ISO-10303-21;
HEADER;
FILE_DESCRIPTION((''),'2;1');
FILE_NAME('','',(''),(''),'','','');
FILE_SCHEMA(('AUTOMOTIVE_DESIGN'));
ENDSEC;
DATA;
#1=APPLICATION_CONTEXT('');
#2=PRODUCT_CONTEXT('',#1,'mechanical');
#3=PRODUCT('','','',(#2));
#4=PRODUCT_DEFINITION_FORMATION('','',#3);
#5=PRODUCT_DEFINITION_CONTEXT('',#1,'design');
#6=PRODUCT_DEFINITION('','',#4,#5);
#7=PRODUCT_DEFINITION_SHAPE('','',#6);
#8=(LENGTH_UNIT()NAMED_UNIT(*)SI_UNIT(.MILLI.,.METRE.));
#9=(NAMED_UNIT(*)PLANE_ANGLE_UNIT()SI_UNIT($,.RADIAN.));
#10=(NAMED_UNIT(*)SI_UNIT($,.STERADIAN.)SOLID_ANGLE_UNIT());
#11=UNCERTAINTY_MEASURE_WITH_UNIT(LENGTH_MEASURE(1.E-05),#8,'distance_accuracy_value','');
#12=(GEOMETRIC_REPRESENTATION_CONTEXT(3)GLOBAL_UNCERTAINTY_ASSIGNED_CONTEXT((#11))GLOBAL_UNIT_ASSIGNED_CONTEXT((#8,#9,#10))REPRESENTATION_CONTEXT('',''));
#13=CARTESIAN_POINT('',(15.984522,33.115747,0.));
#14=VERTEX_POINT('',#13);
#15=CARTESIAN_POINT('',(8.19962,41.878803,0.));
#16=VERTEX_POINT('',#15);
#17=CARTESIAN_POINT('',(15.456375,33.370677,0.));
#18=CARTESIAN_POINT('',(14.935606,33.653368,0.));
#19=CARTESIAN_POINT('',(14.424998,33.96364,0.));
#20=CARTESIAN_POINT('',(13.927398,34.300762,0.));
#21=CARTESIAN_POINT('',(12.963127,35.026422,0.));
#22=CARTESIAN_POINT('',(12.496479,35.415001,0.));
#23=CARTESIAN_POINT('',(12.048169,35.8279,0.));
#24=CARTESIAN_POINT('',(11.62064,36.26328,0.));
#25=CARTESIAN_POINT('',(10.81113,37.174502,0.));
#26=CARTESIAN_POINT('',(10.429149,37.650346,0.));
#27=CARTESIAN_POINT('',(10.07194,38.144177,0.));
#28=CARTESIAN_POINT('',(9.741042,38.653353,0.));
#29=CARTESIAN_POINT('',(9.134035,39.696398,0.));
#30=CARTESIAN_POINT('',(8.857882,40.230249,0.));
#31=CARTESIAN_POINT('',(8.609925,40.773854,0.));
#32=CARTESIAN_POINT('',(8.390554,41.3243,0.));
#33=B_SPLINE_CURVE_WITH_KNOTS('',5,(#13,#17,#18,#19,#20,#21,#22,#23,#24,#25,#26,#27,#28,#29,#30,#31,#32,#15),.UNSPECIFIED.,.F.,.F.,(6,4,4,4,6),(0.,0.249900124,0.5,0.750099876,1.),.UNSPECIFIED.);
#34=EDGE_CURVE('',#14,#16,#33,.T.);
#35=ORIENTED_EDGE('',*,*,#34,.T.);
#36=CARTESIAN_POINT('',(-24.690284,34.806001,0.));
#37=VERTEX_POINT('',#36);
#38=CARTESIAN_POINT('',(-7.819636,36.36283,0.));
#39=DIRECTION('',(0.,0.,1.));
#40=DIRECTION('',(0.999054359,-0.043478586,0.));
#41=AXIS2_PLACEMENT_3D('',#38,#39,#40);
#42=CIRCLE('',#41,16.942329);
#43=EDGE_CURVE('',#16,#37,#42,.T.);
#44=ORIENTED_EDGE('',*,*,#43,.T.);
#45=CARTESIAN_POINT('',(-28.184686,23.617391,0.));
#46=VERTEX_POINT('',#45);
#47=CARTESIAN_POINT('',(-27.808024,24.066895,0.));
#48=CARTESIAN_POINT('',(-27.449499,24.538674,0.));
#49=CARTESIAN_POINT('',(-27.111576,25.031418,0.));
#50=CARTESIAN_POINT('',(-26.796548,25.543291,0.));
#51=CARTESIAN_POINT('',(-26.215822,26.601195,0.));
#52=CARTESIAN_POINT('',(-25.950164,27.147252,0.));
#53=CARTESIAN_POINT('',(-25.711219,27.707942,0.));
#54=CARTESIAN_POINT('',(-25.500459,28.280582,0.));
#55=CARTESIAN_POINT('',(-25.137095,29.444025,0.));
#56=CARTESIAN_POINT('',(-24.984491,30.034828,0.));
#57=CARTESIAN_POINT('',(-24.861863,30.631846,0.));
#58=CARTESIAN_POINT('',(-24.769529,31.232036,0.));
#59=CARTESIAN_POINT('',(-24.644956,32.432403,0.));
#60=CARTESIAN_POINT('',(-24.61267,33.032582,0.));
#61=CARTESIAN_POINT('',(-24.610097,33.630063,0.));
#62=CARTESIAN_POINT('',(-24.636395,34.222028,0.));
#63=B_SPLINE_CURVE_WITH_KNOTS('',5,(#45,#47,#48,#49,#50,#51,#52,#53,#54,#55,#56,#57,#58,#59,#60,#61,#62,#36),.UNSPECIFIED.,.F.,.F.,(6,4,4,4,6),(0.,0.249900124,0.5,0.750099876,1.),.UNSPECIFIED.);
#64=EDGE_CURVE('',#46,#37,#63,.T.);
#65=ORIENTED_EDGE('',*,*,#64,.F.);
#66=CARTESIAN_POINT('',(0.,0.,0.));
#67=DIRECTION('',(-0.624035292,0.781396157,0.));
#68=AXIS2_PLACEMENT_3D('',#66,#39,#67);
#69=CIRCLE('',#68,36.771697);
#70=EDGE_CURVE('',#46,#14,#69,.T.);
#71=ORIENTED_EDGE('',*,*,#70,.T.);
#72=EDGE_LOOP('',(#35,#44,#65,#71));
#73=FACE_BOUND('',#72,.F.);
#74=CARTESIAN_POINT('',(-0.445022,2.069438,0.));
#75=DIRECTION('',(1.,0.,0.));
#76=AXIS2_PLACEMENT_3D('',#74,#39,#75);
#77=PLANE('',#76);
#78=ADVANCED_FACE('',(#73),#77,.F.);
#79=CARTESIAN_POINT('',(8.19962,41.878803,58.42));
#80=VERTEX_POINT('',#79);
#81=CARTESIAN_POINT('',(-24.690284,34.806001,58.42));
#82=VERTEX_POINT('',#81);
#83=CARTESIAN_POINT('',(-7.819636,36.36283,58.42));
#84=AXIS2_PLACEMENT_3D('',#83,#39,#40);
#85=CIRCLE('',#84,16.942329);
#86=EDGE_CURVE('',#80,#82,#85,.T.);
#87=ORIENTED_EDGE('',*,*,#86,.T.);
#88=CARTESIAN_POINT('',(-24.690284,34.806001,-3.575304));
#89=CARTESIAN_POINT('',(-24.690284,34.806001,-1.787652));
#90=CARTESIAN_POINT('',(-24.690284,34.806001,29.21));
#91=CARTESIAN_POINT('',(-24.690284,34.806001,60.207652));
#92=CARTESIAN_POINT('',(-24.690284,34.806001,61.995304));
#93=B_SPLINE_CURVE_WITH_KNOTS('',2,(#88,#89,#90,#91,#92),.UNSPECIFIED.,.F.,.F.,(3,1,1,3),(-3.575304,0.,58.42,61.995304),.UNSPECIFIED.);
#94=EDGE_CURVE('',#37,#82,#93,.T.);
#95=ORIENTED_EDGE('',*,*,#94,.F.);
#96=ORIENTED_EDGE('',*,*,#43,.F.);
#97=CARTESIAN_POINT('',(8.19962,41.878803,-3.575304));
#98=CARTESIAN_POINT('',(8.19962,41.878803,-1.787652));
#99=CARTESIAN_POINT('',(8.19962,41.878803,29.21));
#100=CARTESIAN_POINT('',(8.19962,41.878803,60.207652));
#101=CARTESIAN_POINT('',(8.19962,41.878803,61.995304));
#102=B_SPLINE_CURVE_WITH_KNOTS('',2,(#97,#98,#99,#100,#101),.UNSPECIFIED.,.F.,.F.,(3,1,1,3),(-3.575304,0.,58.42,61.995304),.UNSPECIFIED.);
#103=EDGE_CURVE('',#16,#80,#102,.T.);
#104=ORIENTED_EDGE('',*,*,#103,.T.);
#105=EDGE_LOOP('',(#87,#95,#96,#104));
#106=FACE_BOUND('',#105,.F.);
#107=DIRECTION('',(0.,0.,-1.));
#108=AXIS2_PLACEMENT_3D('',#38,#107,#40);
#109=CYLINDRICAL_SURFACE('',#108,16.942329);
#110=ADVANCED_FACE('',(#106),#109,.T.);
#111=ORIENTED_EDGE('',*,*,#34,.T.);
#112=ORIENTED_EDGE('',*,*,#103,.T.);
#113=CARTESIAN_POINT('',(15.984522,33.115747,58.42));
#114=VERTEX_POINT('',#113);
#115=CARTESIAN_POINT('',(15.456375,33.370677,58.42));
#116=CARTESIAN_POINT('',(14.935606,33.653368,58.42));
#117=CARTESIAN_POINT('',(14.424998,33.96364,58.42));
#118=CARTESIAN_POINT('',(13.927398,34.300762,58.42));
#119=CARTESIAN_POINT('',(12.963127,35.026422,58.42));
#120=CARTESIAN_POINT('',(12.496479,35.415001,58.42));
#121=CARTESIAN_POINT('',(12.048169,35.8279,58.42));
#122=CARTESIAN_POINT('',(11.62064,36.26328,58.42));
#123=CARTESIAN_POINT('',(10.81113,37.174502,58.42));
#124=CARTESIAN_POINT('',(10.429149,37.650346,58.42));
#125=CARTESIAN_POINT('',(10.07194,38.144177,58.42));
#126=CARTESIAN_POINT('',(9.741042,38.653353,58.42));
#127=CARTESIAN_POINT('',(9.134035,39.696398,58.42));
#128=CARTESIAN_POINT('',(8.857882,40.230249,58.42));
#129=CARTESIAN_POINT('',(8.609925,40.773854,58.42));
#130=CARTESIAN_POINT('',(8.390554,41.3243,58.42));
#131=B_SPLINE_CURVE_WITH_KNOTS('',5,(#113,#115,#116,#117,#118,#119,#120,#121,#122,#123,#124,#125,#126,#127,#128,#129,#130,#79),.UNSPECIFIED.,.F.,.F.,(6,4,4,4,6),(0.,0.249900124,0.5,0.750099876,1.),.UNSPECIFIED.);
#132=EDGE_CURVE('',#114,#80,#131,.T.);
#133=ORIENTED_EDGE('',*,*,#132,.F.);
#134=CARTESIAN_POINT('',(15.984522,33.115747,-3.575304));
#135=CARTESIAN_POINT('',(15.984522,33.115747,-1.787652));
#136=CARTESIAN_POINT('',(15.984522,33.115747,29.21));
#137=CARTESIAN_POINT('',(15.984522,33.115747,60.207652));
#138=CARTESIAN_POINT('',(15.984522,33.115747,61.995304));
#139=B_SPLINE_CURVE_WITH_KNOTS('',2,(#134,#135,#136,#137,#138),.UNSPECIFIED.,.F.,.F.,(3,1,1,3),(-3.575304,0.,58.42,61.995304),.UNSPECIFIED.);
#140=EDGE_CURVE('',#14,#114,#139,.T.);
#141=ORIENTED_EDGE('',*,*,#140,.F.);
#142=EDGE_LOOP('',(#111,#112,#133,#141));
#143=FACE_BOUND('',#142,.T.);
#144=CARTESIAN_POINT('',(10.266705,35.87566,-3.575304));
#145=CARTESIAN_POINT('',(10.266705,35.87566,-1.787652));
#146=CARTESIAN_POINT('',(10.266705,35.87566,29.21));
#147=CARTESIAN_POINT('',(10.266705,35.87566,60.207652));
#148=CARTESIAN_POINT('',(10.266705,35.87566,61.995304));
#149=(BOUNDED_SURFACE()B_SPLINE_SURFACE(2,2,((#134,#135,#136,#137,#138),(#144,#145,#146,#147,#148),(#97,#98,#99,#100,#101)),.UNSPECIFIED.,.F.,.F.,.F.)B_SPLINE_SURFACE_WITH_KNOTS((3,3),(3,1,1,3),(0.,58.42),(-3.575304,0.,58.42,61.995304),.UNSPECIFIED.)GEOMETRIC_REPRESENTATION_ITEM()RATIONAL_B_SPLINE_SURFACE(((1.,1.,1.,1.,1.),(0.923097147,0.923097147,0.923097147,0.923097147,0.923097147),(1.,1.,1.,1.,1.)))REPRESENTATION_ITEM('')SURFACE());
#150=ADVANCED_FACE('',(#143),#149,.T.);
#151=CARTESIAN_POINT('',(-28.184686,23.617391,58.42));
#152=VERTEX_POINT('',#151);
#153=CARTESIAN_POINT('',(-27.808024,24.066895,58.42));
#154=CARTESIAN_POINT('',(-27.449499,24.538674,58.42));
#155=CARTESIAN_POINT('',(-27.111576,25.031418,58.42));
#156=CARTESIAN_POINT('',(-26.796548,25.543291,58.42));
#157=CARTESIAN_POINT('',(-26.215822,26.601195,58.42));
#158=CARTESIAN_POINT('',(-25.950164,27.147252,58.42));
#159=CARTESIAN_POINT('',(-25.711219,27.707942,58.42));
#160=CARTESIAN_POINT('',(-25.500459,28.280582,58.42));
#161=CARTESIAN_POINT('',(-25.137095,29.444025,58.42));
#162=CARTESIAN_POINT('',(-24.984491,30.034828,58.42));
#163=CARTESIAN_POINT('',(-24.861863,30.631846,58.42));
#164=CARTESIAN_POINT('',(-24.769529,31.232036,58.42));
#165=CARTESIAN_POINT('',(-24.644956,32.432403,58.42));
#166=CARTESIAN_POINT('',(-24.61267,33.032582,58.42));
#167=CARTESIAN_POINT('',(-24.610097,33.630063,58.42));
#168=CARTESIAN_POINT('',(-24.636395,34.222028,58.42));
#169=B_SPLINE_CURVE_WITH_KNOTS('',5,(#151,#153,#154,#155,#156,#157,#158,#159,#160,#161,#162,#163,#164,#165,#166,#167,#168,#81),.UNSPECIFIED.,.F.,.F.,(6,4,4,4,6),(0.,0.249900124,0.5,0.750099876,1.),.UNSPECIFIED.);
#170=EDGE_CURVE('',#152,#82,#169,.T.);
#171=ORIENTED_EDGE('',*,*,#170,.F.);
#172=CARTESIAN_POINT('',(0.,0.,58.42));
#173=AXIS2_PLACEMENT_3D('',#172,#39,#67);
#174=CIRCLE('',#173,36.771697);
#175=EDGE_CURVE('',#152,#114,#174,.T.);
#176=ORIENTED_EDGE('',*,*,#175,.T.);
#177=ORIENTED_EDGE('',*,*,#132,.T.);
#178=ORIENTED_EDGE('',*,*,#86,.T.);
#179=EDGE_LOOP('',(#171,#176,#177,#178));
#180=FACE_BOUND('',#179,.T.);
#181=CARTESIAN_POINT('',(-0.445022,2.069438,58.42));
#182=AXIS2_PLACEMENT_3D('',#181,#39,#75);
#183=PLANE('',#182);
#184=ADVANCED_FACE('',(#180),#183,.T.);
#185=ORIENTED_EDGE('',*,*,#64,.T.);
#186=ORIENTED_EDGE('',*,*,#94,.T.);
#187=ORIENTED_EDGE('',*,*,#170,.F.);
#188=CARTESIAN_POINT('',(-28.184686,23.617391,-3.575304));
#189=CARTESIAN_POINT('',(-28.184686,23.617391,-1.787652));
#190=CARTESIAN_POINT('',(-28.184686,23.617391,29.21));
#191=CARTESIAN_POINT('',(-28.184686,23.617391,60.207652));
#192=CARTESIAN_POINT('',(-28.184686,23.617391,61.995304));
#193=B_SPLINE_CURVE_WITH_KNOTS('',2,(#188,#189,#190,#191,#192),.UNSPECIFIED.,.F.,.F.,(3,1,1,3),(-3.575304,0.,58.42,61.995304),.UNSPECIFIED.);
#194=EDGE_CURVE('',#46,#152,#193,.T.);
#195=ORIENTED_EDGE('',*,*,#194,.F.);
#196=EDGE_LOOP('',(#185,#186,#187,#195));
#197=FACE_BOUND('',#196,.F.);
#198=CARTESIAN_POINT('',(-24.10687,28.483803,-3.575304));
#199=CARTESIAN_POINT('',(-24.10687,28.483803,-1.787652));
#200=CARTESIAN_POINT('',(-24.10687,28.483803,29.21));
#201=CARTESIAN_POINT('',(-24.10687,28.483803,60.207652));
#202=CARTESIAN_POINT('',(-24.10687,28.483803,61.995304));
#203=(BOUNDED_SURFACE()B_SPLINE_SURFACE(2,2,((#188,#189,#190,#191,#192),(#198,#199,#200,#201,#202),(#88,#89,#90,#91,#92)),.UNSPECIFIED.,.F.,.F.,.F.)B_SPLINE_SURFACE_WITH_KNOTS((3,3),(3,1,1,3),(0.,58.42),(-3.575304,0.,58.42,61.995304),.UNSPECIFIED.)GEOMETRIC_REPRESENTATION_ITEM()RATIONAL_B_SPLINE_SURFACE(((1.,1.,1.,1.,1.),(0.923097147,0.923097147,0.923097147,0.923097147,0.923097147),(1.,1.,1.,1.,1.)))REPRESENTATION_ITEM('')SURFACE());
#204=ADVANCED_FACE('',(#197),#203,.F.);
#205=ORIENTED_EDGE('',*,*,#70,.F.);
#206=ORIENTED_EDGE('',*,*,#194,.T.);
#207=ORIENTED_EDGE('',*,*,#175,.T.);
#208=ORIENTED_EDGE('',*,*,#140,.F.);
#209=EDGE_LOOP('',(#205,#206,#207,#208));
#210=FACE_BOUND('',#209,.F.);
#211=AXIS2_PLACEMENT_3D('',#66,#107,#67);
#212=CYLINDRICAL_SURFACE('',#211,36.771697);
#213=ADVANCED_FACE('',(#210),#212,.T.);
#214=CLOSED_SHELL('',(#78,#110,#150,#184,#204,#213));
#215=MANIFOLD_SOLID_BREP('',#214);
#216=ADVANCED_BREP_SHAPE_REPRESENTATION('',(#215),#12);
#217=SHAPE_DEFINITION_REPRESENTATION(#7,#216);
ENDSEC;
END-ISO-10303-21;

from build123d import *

# Parameters (mm, degrees)
F1_DEPTH = 58.42
F2_R     = 15.24
F3_R     = 6.8301694269
F4_DEPTH = 30.48


with BuildPart() as f1:
    # F0 (on Top) → F1 (new body)
    with BuildSketch(Plane.XY):
        with BuildLine():
            ThreePointArc((-22.9468365368, 28.7332625584), (-15.943079518, -33.1357193942), (36.7716967829, 0))
            ThreePointArc((36.7716967829, 0), (29.0432904816, 22.553158588), (9.1066714076, 35.6262013154))
            ThreePointArc((9.1066714076, 35.6262013154), (-7.7308275028, 35.9498538302), (-22.9468365368, 28.7332625584))
        make_face()
        with BuildLine():
            ThreePointArc((-22.9468365368, 28.7332625584), (-7.7308275028, 35.9498538302), (9.1066714076, 35.6262013154))
            ThreePointArc((9.1066714076, 35.6262013154), (-11.3815660909, 52.926499418), (-22.9468365368, 28.7332625584))
        make_face()
    extrude(amount=F1_DEPTH)

    # F2
    f2_edges = [f1.edges().sort_by_distance(p)[0] for p in [
        (9.106671, 35.626201, 29.21),
        (-22.946837, 28.733263, 29.21),
    ]]
    fillet(f2_edges, radius=F2_R)

    # F3 (on face) → F4 (join)
    with BuildSketch(Plane.XY.offset(58.42)):
        with Locations((-1.7507391749, 3.4323732834)):
            Circle(F3_R)
    extrude(amount=-F4_DEPTH)


solid = f1.part
